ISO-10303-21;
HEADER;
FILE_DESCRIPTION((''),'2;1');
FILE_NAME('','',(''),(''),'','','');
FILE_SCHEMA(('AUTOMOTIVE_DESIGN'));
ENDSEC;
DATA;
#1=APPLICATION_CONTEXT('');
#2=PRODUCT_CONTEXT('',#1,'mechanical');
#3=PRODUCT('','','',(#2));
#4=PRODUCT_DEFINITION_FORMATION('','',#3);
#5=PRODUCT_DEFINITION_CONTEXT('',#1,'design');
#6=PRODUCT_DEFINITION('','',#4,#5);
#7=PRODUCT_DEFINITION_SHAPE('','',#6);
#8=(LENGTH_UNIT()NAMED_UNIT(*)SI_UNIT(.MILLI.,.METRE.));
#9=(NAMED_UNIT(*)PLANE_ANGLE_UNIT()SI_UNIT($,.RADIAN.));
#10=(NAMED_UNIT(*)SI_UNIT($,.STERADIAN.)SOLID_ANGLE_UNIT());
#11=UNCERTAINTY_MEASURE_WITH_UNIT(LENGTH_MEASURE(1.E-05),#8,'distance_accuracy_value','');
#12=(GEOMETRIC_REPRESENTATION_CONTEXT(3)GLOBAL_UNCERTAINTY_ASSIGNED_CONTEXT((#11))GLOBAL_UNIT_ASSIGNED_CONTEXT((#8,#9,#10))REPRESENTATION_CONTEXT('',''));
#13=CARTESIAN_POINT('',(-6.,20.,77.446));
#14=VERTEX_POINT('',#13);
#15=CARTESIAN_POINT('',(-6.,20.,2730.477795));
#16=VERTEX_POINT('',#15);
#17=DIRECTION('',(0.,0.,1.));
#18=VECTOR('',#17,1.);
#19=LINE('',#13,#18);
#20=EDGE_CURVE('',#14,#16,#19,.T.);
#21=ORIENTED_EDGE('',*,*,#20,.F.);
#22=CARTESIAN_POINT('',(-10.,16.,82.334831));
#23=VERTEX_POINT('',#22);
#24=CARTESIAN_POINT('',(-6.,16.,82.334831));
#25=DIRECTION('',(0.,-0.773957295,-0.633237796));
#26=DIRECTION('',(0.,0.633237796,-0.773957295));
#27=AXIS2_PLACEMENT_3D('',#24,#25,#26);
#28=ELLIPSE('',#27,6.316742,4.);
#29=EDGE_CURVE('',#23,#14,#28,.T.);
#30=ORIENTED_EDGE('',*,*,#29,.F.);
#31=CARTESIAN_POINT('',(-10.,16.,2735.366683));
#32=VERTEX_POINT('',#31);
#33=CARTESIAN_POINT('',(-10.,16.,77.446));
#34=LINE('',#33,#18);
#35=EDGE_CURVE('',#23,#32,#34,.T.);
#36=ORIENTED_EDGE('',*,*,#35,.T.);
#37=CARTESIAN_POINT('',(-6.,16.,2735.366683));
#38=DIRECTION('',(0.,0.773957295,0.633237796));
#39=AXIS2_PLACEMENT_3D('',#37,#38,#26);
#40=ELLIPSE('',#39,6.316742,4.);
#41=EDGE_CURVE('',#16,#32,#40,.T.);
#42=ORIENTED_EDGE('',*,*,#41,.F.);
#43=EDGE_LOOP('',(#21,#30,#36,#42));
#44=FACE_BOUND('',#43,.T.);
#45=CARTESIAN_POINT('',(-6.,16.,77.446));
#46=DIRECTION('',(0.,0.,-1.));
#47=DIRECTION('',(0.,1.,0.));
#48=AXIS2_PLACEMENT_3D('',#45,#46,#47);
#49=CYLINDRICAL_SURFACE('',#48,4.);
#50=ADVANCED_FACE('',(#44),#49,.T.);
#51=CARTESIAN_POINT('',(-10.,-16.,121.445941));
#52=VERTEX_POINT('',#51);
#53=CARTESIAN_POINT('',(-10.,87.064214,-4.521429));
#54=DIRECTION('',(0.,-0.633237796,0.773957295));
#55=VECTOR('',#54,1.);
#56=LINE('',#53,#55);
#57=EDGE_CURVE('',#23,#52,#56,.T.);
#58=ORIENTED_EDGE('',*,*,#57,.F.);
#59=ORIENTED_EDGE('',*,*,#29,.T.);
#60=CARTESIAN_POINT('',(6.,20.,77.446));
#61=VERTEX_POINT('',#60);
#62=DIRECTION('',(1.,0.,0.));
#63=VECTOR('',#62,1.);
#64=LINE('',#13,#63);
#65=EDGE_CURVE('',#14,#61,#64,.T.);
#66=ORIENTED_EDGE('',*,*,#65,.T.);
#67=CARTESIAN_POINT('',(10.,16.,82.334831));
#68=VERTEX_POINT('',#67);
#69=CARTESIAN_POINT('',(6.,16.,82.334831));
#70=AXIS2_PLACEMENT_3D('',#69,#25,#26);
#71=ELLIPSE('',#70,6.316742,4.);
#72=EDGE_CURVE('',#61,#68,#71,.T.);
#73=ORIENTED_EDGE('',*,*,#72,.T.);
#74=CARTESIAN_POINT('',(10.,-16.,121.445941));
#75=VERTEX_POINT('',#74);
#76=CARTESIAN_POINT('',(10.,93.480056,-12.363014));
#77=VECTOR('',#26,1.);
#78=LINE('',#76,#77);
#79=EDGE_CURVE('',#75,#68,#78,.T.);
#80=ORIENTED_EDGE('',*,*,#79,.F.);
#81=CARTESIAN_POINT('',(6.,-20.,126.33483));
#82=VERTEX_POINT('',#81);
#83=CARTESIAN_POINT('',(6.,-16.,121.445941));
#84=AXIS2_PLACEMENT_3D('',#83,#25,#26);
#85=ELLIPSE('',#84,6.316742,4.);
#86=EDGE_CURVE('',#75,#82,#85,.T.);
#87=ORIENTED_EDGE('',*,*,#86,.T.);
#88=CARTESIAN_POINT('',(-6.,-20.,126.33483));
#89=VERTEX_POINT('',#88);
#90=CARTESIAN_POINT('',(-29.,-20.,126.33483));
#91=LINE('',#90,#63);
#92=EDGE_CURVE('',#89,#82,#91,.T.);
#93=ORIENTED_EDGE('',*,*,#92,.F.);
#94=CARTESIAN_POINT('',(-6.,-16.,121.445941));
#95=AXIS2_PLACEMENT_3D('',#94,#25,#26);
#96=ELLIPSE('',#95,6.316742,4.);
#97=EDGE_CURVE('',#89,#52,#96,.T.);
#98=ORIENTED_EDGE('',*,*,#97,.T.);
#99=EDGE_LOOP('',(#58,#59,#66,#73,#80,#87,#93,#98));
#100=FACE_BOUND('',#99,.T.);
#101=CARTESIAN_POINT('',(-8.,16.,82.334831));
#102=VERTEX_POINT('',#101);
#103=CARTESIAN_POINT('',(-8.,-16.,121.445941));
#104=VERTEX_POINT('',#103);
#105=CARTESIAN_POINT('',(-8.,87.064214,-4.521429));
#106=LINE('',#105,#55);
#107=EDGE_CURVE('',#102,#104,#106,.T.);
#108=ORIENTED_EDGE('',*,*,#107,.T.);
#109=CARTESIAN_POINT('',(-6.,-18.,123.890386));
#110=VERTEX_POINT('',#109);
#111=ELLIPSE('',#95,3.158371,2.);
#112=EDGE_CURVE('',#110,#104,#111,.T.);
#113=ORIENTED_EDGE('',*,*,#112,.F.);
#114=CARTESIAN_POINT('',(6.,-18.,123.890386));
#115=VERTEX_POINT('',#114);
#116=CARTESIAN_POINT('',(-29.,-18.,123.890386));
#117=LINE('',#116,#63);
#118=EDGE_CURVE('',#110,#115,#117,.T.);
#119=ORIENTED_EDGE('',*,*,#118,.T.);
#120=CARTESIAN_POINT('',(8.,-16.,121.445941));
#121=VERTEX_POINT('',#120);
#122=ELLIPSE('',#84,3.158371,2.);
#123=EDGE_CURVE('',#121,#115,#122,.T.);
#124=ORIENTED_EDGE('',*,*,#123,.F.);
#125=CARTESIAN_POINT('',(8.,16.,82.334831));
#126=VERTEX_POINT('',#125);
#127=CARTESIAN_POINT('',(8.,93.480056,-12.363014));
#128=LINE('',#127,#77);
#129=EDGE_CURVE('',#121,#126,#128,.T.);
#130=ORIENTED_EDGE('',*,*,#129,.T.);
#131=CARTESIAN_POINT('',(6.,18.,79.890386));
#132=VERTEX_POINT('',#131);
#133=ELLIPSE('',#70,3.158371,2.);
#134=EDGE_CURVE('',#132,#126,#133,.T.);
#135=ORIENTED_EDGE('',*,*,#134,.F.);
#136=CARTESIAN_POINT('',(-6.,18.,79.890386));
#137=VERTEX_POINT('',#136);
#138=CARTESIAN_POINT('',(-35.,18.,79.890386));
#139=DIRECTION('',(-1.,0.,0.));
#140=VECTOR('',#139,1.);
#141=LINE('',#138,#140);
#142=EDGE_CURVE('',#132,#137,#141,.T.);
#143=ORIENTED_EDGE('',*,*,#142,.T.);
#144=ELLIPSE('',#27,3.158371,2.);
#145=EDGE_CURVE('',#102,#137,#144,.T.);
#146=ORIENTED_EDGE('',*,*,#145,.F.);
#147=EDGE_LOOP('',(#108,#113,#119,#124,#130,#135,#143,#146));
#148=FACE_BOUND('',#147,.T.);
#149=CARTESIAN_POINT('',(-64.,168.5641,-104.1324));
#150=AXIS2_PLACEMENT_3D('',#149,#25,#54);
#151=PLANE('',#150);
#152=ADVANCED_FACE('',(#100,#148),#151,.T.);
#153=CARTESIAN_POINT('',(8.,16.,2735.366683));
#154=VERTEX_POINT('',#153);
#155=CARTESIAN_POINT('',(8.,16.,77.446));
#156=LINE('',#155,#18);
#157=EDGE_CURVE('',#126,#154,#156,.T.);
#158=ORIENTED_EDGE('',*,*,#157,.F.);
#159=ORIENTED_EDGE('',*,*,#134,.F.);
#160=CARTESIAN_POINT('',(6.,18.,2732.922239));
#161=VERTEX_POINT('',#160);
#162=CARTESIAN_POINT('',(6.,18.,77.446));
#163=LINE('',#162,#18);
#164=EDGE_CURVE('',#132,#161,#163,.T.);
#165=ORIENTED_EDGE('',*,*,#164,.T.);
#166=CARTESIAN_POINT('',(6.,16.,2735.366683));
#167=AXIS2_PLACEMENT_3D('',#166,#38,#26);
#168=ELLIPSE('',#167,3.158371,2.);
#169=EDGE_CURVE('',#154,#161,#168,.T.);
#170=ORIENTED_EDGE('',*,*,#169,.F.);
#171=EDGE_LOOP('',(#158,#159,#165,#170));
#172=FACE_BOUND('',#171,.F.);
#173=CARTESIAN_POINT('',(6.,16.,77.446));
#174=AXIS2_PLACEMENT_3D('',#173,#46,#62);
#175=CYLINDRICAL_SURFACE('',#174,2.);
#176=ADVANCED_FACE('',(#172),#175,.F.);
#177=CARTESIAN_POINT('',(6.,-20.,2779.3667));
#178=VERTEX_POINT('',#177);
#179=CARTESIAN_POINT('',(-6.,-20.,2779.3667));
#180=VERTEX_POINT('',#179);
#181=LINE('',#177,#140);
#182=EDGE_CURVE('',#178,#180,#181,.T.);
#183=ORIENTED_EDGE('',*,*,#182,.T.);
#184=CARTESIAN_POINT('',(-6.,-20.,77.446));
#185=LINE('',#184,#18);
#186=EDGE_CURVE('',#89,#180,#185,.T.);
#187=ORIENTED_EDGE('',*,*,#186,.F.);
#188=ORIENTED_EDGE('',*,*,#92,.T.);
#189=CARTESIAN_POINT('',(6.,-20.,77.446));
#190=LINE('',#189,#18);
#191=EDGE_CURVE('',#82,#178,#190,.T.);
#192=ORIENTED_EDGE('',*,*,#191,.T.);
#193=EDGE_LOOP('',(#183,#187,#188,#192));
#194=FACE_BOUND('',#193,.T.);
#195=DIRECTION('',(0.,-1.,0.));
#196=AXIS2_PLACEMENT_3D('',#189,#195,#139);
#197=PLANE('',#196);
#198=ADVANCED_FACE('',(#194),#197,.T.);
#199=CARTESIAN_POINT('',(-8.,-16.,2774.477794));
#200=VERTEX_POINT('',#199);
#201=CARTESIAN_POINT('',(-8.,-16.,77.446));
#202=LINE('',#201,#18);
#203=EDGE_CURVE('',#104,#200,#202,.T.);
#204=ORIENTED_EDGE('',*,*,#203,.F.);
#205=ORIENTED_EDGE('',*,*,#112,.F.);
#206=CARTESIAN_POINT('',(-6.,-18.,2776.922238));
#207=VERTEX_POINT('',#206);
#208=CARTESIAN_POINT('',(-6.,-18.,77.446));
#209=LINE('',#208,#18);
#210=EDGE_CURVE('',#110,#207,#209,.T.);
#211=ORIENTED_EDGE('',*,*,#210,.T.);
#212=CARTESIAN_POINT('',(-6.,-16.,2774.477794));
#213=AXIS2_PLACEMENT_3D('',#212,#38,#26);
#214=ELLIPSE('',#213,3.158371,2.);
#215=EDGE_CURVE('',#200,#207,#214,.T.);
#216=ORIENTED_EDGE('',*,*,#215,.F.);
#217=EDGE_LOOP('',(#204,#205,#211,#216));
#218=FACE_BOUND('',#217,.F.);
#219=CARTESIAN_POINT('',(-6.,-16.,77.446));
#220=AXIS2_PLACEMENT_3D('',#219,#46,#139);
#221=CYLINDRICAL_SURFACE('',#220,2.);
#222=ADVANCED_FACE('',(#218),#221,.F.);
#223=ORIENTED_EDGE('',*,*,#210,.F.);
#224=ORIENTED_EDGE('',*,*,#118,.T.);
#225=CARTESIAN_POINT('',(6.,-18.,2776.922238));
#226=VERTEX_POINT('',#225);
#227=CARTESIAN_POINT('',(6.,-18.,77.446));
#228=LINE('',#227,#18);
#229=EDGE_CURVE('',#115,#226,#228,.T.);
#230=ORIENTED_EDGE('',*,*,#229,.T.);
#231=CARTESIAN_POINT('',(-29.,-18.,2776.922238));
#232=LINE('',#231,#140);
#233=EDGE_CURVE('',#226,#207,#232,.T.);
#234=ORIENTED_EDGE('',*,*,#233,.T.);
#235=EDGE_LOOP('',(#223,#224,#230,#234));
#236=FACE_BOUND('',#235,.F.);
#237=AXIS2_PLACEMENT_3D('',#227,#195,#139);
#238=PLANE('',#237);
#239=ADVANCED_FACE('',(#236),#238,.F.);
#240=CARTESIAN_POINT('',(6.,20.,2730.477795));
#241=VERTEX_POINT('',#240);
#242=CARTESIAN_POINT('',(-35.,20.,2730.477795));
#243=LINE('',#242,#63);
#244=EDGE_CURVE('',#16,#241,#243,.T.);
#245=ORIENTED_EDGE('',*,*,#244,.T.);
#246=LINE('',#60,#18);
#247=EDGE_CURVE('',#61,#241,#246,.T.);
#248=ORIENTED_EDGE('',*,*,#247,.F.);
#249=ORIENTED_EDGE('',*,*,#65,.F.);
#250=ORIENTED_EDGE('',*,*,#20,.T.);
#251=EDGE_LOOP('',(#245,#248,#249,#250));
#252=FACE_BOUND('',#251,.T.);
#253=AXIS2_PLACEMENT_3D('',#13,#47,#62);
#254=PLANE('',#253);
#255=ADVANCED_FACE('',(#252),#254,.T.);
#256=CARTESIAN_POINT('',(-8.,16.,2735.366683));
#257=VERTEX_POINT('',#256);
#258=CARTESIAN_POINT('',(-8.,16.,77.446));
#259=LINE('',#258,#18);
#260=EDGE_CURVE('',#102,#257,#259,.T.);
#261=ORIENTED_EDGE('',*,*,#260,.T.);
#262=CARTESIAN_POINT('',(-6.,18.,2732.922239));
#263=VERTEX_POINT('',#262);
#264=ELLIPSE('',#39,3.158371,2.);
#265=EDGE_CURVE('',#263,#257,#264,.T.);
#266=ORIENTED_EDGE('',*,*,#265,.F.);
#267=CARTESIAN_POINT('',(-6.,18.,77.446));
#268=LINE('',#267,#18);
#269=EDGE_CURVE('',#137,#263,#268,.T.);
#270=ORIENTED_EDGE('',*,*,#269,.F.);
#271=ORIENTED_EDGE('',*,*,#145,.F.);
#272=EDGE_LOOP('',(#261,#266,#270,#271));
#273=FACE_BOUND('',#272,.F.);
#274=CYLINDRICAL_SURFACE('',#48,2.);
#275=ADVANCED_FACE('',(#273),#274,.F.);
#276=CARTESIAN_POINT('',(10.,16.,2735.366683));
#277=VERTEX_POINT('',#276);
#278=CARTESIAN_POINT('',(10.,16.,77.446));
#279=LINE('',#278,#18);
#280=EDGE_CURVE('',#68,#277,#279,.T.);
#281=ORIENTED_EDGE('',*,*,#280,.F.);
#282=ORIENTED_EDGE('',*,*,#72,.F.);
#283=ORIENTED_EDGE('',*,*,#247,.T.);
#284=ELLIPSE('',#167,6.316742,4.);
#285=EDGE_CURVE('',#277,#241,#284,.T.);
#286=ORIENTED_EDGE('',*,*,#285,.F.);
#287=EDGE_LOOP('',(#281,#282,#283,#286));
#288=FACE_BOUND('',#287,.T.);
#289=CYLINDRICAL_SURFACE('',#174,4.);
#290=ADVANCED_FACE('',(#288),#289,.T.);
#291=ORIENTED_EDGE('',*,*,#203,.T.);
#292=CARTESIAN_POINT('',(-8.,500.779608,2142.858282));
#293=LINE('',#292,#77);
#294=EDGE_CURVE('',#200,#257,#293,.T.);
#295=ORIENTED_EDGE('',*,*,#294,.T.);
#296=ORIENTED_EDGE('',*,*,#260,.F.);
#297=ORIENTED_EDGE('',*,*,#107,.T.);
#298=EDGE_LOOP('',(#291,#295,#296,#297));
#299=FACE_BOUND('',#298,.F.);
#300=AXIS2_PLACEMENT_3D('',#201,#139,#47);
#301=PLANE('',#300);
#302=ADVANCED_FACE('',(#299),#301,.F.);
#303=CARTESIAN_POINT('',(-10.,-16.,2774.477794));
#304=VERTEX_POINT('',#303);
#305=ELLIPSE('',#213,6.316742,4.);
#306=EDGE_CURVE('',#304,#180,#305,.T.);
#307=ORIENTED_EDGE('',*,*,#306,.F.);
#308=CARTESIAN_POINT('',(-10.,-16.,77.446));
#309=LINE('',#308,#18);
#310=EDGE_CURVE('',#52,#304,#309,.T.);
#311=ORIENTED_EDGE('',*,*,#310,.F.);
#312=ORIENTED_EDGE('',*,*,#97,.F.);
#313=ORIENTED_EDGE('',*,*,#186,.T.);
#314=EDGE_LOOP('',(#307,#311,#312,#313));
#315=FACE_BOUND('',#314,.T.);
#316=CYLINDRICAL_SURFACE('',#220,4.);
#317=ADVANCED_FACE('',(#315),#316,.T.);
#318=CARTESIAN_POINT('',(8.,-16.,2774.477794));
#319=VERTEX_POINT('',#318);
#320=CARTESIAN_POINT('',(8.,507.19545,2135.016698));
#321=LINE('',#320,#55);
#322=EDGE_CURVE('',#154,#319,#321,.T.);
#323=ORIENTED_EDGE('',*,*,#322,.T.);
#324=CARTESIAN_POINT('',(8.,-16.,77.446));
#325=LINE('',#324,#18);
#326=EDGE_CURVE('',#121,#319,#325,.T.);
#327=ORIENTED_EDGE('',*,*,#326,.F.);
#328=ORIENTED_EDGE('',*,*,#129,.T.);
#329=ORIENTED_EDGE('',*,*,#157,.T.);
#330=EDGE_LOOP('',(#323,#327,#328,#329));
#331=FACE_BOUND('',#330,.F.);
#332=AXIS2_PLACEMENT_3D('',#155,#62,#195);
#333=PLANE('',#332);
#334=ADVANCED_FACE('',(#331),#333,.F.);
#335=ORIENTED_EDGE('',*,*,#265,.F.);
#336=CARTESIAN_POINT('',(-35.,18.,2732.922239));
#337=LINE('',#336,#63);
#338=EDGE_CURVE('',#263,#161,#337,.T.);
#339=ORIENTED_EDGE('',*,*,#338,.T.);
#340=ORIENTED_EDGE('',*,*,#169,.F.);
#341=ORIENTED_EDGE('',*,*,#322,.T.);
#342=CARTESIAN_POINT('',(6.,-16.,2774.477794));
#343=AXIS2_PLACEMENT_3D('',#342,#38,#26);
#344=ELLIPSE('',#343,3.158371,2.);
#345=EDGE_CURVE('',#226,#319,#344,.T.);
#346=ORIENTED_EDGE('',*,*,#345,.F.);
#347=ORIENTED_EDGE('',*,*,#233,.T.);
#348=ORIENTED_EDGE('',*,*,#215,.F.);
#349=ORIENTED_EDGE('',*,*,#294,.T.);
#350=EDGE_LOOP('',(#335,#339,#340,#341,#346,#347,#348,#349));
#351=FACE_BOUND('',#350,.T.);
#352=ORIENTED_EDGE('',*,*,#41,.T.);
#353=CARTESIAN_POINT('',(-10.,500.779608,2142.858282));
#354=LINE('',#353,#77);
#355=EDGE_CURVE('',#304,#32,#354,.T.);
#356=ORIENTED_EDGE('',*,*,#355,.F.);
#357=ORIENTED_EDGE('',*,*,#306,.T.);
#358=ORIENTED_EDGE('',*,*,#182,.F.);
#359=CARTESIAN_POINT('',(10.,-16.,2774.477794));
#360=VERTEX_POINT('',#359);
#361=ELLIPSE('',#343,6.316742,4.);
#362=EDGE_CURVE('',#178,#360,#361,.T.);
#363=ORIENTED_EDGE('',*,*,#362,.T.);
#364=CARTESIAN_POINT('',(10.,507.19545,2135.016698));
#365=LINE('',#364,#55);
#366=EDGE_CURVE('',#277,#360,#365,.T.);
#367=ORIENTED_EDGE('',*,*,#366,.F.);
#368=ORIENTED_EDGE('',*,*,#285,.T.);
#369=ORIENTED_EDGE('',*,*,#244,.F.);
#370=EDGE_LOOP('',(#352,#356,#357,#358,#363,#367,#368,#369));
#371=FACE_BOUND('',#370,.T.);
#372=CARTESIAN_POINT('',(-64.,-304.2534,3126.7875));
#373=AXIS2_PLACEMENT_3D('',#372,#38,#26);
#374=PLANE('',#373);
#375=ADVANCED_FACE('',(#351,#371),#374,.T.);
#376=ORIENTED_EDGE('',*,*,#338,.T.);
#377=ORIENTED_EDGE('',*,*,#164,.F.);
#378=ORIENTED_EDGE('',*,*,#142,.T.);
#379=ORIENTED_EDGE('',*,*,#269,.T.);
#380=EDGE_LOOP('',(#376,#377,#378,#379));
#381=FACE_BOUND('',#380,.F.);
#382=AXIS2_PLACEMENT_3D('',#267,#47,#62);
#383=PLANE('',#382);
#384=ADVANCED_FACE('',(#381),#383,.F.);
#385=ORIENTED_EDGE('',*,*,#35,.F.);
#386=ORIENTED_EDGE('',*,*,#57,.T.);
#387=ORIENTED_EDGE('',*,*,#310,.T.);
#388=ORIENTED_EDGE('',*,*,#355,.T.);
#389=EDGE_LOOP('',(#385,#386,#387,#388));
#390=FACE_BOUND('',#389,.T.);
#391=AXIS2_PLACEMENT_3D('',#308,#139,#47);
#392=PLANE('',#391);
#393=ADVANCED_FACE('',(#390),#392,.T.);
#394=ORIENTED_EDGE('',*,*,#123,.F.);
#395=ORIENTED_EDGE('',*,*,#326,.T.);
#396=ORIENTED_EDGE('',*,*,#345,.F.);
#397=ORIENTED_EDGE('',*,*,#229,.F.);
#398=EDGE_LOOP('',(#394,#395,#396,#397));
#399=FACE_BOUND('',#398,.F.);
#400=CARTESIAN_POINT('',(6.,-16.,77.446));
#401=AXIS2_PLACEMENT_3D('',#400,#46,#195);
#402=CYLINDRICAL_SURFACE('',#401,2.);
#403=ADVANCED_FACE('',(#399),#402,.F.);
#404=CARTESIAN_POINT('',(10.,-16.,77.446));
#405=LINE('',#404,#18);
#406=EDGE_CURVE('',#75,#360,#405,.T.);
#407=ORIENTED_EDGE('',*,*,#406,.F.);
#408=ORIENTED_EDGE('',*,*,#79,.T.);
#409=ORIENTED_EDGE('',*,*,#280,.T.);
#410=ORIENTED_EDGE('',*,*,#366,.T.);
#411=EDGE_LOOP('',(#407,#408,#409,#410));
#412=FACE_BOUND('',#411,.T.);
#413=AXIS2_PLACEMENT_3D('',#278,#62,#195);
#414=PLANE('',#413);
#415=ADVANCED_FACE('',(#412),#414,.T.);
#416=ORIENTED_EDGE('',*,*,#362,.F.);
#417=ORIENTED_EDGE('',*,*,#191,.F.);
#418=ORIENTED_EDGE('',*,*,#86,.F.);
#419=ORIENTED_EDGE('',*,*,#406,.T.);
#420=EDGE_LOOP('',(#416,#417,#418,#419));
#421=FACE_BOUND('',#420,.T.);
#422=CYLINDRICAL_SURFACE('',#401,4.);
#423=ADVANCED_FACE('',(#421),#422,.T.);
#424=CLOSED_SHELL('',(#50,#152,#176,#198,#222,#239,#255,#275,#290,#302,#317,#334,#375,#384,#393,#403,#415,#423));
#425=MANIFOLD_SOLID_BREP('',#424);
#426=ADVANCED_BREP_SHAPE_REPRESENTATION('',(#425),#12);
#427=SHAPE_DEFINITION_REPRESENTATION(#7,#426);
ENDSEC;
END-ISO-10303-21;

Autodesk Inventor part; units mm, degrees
ref_plane "Start Plane" through (0, 0, 77.446) normal (0, 0, 1) x (1, 0, 0)
ref_plane "End Plane" through (0, 0, 2779.3667) normal (0, 0, 1) x (1, 0, 0)
sketch "Sketch" plane through (0, 0, 0) normal (0, 0, 1) x (1, 0, 0)
  line L0 (-10, -16) -> (-10, 16)
  line L1 (-6, 20) -> (6, 20)
  line L2 (10, 16) -> (10, -16)
  line L3 (6, -20) -> (-6, -20)
  arc A0 (-10, -16) -> (-6, -20) centre (-6, -16) ccw
  arc A1 (10, 16) -> (6, 20) centre (6, 16) ccw
  arc A2 (-6, 20) -> (-10, 16) centre (-6, 16) ccw
  arc A3 (6, -20) -> (10, -16) centre (6, -16) ccw
  arc A4 (-6, 18) -> (-8, 16) centre (-6, 16) ccw
  line L4 (-6, 18) -> (6, 18)
  arc A5 (8, 16) -> (6, 18) centre (6, 16) ccw
  line L5 (8, 16) -> (8, -16)
  arc A6 (6, -18) -> (8, -16) centre (6, -16) ccw
  line L6 (6, -18) -> (-6, -18)
  arc A7 (-8, -16) -> (-6, -18) centre (-6, -16) ccw
  line L7 (-8, -16) -> (-8, 16)
  line L8 (0, 29.1598) -> (0, -29.1598) construction
  line L9 (-15.1598, 0) -> (15.1598, 0) construction
  dimension "d7" = 4
  dimension "d9" = 20
  dimension "d11" = 40
  dimension "d12" = 2
  dimension "d15" = 10
  dimension "d16" = 20
extrude "Body" add sketch "Sketch" along normal up to surface (2701.9207 mm away) from surface at 77.446
sketch "Sketch3" plane through (0, 0, 0) normal (0, 0, 1) x (1, 0, 0)
  line L0 (0, 0) -> (10, 0)
ref_plane "Work Plane3" through (0, 0, 0) normal (0, -1, 0) x (1, 0, 0)
ref_plane "Work Plane4" through (-64, -304.2534, 3126.7875) normal (0, 0.7739573, 0.6332378) x (1, 0, 0)
split "Split1" plane through (-64, -304.2534, 3126.7875) removes the side toward (0, 0.7739573, 0.6332378)
ref_plane "Work Plane5" through (-64, 168.5641, -104.1324) normal (0, -0.7739573, -0.6332378) x (1, 0, 0)
split "Split2" plane through (-64, 168.5641, -104.1324) removes the side toward (0, -0.7739573, -0.6332378)
sketch "Sketch4" plane through (0, 0, 0) normal (0, -1, 0) x (1, 0, 0)
  line L0 (-2, 77.446) -> (12, 77.446) projected
  line L1 (-2, 2779.3667) -> (12, 2779.3667) projected
  dimension "d18" = 2701.9207
equation "\"d7\" = G_IR"
equation "\"d9\" = G_W"
equation "\"d11\" = G_H"
equation "\"d12\" = G_T"
equation "\"d15\" = 0.5 * d9"
equation "\"d16\" = 0.5 * d11"
equation "\"d3\" = G_L"
equation "\"G_W\" = 20"
equation "\"G_H\" = 40"
equation "\"G_T\" = 2"
equation "\"G_IR\" = 4"
equation "\"G_L\" = d18"
equation "\"G_OFFSET_START\" = -77.44596"
equation "\"G_OFFSET_END\" = -63.16742"
equation "\"d13\" = -G_OFFSET_START"
equation "\"d14\" = G_OFFSET_END + B_L"
equation "\"B_L\" = 2842.53408"
properties part number "ISO 10799-2 - 40x20x2 - 2701,92" material "Steel, Mild"
